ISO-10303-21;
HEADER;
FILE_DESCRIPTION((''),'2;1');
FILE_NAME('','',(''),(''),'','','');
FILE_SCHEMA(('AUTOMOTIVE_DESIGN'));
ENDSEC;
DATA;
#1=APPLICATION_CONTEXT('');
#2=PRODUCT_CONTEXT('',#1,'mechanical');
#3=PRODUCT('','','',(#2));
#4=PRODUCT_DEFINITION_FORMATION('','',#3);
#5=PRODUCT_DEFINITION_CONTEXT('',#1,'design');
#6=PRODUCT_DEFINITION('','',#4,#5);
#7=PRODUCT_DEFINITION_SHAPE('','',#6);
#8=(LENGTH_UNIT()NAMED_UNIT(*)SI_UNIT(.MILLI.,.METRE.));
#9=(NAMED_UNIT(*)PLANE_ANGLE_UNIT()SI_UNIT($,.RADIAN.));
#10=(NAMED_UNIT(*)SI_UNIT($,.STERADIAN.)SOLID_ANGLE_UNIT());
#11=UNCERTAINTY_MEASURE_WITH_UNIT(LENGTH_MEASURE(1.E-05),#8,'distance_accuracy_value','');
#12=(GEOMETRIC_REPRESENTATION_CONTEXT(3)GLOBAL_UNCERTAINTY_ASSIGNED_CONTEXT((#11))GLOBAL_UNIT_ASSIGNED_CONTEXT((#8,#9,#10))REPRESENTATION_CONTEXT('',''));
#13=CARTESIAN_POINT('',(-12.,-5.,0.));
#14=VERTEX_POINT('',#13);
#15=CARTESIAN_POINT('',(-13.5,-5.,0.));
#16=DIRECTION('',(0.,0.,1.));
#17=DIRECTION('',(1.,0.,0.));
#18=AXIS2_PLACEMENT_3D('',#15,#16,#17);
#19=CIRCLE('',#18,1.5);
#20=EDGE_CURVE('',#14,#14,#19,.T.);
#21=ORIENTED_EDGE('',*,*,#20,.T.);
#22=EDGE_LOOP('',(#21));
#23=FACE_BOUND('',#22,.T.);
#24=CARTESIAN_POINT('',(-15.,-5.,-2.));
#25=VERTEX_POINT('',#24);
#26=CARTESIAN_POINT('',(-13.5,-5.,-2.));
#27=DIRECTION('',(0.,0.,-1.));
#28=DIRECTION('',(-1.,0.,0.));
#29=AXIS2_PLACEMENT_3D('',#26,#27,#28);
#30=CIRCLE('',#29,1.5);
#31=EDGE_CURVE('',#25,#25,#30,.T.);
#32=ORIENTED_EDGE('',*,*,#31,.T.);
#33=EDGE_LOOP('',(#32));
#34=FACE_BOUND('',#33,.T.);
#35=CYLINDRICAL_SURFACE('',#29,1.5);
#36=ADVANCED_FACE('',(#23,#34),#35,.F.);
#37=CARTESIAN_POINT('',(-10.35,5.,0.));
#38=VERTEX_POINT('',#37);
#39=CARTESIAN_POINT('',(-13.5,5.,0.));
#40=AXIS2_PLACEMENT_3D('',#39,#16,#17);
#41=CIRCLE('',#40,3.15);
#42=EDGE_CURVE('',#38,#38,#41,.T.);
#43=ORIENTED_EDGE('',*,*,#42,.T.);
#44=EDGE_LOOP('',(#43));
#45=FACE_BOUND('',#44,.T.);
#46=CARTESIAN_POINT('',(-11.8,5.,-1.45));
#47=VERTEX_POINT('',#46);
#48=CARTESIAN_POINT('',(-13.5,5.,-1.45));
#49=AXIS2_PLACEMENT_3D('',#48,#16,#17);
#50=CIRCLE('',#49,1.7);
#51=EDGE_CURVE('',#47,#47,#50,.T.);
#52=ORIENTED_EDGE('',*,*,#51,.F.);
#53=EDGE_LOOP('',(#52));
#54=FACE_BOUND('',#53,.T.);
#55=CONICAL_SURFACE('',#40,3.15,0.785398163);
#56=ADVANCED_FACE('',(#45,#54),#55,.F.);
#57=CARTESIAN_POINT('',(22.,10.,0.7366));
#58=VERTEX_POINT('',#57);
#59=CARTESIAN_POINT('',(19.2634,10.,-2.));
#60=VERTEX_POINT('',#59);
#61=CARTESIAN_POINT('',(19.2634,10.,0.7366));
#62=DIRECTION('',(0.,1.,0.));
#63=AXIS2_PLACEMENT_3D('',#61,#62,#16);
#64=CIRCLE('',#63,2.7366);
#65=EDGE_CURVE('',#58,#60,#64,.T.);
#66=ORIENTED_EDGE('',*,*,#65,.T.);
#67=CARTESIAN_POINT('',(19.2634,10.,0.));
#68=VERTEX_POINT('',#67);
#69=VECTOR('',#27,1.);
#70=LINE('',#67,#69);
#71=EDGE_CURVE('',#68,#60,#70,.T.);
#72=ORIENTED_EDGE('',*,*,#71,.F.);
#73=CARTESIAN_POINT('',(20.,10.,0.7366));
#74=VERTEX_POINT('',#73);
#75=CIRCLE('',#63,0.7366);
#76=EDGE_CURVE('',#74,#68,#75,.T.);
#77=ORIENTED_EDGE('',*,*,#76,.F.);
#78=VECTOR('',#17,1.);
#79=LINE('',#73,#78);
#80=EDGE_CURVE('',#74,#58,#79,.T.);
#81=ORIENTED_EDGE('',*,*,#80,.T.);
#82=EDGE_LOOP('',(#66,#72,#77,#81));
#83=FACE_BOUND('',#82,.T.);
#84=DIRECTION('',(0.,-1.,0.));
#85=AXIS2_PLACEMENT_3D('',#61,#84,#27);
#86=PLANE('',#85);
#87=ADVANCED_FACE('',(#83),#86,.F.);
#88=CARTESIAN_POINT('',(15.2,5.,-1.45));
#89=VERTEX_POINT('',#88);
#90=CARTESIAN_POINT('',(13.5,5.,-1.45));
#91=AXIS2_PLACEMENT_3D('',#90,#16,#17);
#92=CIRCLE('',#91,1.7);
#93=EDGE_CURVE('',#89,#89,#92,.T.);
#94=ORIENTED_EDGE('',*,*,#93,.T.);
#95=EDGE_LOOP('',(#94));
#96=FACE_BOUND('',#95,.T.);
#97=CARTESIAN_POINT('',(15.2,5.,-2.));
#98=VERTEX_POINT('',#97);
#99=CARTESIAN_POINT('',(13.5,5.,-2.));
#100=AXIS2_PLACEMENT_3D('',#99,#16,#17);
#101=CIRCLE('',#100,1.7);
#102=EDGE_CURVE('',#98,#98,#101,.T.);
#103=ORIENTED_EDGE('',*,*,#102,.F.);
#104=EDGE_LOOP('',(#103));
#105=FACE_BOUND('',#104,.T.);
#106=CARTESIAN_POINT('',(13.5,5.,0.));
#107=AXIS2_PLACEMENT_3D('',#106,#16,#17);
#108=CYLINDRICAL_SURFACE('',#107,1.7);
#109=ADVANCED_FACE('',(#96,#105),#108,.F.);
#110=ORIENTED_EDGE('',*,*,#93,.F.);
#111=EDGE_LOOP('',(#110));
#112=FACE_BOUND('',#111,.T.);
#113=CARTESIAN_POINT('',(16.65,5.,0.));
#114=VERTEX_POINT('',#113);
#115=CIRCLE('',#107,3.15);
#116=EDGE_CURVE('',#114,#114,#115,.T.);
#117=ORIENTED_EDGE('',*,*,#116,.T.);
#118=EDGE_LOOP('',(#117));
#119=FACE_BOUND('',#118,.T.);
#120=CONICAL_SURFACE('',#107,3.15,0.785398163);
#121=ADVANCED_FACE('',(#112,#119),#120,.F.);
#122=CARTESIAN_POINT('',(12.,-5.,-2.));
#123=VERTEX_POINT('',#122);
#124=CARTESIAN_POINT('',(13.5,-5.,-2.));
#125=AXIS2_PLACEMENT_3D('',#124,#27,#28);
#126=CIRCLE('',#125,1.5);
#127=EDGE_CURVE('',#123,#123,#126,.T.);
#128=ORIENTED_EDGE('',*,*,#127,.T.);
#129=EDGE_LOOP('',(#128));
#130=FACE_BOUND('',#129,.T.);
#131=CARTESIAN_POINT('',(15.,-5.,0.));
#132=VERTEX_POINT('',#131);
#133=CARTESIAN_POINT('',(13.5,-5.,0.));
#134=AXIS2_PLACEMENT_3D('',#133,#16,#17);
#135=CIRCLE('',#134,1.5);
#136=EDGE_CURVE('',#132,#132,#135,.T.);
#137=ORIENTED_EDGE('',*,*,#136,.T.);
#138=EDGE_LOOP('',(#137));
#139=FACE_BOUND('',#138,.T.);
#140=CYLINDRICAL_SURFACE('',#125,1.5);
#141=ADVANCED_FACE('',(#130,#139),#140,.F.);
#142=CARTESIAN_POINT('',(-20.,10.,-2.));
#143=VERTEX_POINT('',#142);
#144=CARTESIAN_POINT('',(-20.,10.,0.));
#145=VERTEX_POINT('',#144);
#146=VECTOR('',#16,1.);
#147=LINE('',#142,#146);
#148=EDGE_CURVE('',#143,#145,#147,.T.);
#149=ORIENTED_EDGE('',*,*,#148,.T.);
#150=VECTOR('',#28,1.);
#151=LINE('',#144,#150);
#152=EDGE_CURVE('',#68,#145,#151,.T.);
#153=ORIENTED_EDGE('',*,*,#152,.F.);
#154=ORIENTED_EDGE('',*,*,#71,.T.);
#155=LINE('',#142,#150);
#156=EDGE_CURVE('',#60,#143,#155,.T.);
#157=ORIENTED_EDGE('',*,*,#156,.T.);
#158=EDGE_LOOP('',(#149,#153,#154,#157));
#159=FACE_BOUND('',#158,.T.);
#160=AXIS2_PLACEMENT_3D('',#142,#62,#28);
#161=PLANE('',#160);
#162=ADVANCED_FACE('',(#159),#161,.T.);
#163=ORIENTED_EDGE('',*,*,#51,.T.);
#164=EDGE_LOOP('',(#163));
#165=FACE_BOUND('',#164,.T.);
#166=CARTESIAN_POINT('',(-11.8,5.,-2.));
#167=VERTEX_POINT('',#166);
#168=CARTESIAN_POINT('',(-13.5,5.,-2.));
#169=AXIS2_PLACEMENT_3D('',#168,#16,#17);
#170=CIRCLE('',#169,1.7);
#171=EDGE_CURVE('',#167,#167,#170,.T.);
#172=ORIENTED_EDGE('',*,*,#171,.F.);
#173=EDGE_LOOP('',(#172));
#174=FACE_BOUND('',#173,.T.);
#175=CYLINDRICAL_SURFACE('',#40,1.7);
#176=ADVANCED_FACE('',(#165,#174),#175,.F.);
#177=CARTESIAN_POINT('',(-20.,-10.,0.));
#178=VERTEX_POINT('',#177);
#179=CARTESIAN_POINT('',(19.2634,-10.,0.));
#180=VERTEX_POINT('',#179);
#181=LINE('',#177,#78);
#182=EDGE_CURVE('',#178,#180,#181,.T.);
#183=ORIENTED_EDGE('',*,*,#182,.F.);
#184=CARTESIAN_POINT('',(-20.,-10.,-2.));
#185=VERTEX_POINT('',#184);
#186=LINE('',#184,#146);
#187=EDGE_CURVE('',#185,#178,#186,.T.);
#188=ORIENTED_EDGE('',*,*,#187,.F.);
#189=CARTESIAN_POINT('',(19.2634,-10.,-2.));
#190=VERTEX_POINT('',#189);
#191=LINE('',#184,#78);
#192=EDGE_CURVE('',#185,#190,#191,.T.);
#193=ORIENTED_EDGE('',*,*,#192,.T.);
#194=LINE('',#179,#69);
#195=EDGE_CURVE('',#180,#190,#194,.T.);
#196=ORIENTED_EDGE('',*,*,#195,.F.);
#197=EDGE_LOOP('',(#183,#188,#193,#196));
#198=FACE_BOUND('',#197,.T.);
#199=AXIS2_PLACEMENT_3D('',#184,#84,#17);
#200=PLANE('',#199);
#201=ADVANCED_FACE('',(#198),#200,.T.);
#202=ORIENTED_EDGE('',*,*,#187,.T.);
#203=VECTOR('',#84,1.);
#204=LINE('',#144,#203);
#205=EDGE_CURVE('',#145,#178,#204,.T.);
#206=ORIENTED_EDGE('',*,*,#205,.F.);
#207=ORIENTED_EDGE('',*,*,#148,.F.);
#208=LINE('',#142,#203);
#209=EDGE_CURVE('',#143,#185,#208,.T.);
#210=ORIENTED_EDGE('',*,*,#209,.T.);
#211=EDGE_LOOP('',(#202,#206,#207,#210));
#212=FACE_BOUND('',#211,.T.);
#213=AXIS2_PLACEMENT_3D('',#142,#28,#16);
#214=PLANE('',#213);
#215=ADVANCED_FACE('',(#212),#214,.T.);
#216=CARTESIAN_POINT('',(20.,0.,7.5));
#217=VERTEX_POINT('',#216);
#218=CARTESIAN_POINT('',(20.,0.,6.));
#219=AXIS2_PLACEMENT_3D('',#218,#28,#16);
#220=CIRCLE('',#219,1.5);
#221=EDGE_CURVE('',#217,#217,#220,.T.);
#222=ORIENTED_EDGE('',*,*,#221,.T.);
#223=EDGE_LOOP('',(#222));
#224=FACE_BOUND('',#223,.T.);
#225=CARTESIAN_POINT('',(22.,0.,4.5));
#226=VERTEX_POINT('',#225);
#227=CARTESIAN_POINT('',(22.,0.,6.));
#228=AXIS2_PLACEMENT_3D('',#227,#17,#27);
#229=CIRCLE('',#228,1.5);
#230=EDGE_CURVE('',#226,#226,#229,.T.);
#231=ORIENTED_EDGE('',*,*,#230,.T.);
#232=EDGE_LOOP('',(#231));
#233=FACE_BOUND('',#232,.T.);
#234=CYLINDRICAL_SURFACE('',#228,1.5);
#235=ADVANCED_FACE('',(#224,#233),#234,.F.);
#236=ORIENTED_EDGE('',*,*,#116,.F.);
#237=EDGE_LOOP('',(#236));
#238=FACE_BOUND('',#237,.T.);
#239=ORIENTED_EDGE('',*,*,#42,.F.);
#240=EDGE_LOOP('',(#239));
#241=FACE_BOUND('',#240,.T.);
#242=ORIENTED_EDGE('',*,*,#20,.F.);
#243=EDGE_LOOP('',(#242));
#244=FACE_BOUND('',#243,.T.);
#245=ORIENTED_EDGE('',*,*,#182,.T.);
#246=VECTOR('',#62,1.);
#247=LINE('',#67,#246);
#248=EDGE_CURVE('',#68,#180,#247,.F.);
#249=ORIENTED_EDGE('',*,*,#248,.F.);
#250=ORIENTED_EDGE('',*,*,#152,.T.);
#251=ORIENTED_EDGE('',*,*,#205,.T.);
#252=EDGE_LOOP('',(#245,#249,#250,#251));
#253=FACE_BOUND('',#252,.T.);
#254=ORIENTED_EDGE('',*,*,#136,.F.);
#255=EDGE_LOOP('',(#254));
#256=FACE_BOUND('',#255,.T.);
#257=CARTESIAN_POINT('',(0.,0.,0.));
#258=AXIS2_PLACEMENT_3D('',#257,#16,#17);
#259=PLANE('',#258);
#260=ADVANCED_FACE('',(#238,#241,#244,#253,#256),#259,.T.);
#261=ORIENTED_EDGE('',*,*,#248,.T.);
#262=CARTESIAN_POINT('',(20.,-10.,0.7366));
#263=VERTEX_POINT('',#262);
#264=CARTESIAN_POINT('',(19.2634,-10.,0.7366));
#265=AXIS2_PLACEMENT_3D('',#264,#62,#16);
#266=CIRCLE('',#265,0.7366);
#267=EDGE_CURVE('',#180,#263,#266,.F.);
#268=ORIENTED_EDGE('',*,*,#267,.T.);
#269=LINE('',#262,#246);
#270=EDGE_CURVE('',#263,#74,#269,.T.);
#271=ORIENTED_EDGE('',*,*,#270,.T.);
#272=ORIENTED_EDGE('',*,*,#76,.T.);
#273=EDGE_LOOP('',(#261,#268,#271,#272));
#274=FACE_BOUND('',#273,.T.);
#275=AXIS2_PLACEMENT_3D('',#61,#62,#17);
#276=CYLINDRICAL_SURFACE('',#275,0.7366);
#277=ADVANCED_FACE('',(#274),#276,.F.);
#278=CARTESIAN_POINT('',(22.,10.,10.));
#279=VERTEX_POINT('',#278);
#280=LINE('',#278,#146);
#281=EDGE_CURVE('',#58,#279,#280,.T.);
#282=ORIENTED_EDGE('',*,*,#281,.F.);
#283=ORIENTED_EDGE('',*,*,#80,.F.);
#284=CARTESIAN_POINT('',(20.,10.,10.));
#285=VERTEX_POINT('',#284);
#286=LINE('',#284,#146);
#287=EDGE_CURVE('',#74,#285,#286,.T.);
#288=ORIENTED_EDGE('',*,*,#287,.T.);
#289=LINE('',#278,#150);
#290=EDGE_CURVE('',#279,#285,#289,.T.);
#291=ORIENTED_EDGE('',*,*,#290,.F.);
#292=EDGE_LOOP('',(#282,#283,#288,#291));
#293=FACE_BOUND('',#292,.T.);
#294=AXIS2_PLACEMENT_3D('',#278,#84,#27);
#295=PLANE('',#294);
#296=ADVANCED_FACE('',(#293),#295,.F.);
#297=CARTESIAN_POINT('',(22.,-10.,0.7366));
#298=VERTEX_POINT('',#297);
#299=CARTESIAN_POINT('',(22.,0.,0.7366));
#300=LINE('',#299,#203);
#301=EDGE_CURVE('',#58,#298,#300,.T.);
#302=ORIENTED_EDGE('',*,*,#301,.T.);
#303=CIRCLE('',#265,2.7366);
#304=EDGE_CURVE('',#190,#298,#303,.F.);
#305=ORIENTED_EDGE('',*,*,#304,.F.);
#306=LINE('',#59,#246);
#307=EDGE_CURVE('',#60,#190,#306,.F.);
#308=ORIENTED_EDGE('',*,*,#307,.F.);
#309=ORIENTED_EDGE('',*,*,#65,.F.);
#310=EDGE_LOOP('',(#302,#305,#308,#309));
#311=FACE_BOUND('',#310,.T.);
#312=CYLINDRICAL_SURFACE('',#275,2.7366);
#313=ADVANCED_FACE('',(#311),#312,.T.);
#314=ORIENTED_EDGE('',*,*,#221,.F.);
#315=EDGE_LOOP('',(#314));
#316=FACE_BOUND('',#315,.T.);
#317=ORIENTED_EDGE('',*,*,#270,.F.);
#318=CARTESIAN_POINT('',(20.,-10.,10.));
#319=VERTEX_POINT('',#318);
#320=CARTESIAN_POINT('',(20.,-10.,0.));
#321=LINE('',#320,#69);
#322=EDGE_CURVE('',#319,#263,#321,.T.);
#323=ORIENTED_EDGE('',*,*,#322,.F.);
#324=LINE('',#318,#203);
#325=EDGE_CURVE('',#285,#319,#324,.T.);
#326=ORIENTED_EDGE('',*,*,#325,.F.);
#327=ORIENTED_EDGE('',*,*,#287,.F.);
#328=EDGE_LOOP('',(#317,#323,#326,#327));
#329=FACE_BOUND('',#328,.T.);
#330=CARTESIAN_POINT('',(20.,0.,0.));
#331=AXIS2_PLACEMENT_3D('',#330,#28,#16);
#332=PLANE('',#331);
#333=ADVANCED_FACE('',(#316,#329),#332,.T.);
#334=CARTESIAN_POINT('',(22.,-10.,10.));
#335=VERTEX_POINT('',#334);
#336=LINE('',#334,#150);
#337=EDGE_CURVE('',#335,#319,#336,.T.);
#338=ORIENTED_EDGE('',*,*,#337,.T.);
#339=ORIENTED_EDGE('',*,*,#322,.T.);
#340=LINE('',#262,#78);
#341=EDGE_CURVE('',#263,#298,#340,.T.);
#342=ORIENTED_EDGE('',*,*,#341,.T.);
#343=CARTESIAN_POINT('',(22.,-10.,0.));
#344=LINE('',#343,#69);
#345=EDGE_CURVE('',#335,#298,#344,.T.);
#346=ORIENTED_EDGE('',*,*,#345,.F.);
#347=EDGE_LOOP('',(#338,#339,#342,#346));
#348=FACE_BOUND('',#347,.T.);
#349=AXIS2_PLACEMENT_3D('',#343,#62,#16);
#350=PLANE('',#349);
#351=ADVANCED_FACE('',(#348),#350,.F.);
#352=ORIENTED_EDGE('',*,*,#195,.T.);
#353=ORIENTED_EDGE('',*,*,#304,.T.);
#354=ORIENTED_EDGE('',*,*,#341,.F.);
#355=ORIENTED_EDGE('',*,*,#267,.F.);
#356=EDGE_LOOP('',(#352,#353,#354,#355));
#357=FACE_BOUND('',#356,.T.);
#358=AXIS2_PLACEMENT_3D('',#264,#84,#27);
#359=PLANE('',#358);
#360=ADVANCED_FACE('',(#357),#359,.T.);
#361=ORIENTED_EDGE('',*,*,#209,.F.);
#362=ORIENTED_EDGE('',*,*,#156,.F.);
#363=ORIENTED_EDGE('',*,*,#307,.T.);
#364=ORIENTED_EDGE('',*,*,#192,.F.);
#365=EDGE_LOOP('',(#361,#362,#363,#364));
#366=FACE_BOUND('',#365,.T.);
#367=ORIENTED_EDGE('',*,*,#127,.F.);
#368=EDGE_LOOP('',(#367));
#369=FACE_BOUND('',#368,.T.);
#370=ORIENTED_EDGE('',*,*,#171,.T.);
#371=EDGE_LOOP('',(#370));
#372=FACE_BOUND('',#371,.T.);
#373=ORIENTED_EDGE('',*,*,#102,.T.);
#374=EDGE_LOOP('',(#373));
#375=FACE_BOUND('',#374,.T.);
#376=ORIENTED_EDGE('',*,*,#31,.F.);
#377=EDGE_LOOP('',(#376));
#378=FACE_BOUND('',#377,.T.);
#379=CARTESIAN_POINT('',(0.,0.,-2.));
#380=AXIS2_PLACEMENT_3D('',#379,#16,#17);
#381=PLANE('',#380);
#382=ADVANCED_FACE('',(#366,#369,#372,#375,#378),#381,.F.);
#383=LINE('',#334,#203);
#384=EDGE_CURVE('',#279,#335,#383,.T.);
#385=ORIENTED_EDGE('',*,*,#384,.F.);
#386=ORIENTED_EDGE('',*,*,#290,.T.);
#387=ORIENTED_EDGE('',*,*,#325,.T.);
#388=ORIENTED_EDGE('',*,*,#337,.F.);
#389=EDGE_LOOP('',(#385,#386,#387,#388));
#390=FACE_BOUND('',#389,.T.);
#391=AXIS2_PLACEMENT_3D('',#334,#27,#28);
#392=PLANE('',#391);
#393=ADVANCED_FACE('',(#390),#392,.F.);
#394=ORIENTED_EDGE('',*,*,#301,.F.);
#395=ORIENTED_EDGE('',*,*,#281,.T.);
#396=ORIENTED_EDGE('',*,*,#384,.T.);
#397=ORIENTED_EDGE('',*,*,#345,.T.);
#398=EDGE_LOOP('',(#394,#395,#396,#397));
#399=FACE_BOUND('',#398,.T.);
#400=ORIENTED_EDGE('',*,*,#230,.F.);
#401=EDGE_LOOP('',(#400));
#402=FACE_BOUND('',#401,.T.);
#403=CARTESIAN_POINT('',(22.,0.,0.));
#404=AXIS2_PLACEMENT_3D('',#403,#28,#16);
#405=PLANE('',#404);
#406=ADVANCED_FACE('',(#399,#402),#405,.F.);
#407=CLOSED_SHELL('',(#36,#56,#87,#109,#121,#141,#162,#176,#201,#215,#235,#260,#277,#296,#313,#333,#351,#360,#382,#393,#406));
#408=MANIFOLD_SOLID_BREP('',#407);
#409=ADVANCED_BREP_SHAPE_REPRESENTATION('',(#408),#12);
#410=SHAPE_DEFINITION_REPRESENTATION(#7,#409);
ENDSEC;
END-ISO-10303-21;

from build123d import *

# Parameters (mm, degrees)
SKETCH_1_W                       = 40
SKETCH_1_H                       = 20
SM_BASE_FLANGE_1_DEPTH           = 2
SM_EDGE_FLANGE_1_STRIP_W         = 9.4732
SM_EDGE_FLANGE_1_STRIP_H         = 2
SM_EDGE_FLANGE_1_STRIP_CUT_DEPTH = 20
SM_EDGE_FLANGE_1_DEPTH           = 20
HOLE_WIZARD_M3_2_AT_2_COUNT      = 2
HOLE_WIZARD_M3_2_AT_2_PITCH      = 27
HOLE_WIZARD_M3_1_D               = 3
HOLE_WIZARD_M3_2_2_D             = 3


# Sheet-metal steps are written as plain solids
with BuildPart() as part:
    # Sketch 1 → 基材-凸緣1 (new body)
    with BuildSketch(Plane.XY):
        Rectangle(SKETCH_1_W, SKETCH_1_H)
    extrude(amount=-SM_BASE_FLANGE_1_DEPTH)

    # 邊線-凸緣1 strip (across the edge) → 邊線-凸緣1 strip cut (cut)
    with BuildSketch(Plane(origin=(20, -10, 0), x_dir=(-1, 0, 0), z_dir=(0, 1, 0))):
        with Locations((-4, -1)):
            Rectangle(SM_EDGE_FLANGE_1_STRIP_W, SM_EDGE_FLANGE_1_STRIP_H)
    extrude(amount=SM_EDGE_FLANGE_1_STRIP_CUT_DEPTH, mode=Mode.SUBTRACT)

    # 邊線-凸緣1 section (across the edge) → 邊線-凸緣1 (add)
    with BuildSketch(Plane(origin=(20, -10, 0), x_dir=(-1, 0, 0), z_dir=(0, 1, 0))):
        with BuildLine():
            Line((-2, 0.7366), (-2, 10))
            Line((-2, 10), (0, 10))
            Line((0, 10), (0, 0.7366))
            ThreePointArc((0, 0.7366), (0.215745145, 0.215745145), (0.7366, 0))
            Line((0.7366, 0), (0.7366, -2))
            ThreePointArc((0.7366, -2), (-1.198468417, -1.198468417), (-2, 0.7366))
        make_face()
    extrude(amount=SM_EDGE_FLANGE_1_DEPTH)

    # 草圖11 → Hole Wizard M3 _2 (revolve, cut)
    with BuildSketch(Plane(origin=(-13.5, 5, 0), x_dir=(0, -1, 0), z_dir=(1, 0, 0))):
        Polygon((0, 0), (0, 2), (1.7, 2), (1.7, 1.45), (3.15, 0), align=None)
    hole_wizard_m3_2 = revolve(axis=Axis((-13.5, 5, 6.35), (0, 0, -1)), mode=Mode.SUBTRACT)

    # Hole Wizard M3 _2 at 2: Hole Wizard M3 _2 ×2
    with Locations(*[(i * HOLE_WIZARD_M3_2_AT_2_PITCH, 0, 0) for i in range(1, HOLE_WIZARD_M3_2_AT_2_COUNT)]):
        add(hole_wizard_m3_2, mode=Mode.SUBTRACT)

    # M3 螺紋孔1 (through all)
    with Locations(Plane(origin=(22, 0, 0), x_dir=(0, 0, -1), z_dir=(1, 0, 0))):
        with Locations((-6, 0)):
            Hole(HOLE_WIZARD_M3_1_D / 2)

    # Hole Wizard M3 _2 2 (through all)
    with Locations(Plane(origin=(0, 0, -2), x_dir=(-1, 0, 0), z_dir=(0, 0, -1))):
        with Locations((-13.5, -5), (13.5, -5)):
            Hole(HOLE_WIZARD_M3_2_2_D / 2)


solid = part.part
